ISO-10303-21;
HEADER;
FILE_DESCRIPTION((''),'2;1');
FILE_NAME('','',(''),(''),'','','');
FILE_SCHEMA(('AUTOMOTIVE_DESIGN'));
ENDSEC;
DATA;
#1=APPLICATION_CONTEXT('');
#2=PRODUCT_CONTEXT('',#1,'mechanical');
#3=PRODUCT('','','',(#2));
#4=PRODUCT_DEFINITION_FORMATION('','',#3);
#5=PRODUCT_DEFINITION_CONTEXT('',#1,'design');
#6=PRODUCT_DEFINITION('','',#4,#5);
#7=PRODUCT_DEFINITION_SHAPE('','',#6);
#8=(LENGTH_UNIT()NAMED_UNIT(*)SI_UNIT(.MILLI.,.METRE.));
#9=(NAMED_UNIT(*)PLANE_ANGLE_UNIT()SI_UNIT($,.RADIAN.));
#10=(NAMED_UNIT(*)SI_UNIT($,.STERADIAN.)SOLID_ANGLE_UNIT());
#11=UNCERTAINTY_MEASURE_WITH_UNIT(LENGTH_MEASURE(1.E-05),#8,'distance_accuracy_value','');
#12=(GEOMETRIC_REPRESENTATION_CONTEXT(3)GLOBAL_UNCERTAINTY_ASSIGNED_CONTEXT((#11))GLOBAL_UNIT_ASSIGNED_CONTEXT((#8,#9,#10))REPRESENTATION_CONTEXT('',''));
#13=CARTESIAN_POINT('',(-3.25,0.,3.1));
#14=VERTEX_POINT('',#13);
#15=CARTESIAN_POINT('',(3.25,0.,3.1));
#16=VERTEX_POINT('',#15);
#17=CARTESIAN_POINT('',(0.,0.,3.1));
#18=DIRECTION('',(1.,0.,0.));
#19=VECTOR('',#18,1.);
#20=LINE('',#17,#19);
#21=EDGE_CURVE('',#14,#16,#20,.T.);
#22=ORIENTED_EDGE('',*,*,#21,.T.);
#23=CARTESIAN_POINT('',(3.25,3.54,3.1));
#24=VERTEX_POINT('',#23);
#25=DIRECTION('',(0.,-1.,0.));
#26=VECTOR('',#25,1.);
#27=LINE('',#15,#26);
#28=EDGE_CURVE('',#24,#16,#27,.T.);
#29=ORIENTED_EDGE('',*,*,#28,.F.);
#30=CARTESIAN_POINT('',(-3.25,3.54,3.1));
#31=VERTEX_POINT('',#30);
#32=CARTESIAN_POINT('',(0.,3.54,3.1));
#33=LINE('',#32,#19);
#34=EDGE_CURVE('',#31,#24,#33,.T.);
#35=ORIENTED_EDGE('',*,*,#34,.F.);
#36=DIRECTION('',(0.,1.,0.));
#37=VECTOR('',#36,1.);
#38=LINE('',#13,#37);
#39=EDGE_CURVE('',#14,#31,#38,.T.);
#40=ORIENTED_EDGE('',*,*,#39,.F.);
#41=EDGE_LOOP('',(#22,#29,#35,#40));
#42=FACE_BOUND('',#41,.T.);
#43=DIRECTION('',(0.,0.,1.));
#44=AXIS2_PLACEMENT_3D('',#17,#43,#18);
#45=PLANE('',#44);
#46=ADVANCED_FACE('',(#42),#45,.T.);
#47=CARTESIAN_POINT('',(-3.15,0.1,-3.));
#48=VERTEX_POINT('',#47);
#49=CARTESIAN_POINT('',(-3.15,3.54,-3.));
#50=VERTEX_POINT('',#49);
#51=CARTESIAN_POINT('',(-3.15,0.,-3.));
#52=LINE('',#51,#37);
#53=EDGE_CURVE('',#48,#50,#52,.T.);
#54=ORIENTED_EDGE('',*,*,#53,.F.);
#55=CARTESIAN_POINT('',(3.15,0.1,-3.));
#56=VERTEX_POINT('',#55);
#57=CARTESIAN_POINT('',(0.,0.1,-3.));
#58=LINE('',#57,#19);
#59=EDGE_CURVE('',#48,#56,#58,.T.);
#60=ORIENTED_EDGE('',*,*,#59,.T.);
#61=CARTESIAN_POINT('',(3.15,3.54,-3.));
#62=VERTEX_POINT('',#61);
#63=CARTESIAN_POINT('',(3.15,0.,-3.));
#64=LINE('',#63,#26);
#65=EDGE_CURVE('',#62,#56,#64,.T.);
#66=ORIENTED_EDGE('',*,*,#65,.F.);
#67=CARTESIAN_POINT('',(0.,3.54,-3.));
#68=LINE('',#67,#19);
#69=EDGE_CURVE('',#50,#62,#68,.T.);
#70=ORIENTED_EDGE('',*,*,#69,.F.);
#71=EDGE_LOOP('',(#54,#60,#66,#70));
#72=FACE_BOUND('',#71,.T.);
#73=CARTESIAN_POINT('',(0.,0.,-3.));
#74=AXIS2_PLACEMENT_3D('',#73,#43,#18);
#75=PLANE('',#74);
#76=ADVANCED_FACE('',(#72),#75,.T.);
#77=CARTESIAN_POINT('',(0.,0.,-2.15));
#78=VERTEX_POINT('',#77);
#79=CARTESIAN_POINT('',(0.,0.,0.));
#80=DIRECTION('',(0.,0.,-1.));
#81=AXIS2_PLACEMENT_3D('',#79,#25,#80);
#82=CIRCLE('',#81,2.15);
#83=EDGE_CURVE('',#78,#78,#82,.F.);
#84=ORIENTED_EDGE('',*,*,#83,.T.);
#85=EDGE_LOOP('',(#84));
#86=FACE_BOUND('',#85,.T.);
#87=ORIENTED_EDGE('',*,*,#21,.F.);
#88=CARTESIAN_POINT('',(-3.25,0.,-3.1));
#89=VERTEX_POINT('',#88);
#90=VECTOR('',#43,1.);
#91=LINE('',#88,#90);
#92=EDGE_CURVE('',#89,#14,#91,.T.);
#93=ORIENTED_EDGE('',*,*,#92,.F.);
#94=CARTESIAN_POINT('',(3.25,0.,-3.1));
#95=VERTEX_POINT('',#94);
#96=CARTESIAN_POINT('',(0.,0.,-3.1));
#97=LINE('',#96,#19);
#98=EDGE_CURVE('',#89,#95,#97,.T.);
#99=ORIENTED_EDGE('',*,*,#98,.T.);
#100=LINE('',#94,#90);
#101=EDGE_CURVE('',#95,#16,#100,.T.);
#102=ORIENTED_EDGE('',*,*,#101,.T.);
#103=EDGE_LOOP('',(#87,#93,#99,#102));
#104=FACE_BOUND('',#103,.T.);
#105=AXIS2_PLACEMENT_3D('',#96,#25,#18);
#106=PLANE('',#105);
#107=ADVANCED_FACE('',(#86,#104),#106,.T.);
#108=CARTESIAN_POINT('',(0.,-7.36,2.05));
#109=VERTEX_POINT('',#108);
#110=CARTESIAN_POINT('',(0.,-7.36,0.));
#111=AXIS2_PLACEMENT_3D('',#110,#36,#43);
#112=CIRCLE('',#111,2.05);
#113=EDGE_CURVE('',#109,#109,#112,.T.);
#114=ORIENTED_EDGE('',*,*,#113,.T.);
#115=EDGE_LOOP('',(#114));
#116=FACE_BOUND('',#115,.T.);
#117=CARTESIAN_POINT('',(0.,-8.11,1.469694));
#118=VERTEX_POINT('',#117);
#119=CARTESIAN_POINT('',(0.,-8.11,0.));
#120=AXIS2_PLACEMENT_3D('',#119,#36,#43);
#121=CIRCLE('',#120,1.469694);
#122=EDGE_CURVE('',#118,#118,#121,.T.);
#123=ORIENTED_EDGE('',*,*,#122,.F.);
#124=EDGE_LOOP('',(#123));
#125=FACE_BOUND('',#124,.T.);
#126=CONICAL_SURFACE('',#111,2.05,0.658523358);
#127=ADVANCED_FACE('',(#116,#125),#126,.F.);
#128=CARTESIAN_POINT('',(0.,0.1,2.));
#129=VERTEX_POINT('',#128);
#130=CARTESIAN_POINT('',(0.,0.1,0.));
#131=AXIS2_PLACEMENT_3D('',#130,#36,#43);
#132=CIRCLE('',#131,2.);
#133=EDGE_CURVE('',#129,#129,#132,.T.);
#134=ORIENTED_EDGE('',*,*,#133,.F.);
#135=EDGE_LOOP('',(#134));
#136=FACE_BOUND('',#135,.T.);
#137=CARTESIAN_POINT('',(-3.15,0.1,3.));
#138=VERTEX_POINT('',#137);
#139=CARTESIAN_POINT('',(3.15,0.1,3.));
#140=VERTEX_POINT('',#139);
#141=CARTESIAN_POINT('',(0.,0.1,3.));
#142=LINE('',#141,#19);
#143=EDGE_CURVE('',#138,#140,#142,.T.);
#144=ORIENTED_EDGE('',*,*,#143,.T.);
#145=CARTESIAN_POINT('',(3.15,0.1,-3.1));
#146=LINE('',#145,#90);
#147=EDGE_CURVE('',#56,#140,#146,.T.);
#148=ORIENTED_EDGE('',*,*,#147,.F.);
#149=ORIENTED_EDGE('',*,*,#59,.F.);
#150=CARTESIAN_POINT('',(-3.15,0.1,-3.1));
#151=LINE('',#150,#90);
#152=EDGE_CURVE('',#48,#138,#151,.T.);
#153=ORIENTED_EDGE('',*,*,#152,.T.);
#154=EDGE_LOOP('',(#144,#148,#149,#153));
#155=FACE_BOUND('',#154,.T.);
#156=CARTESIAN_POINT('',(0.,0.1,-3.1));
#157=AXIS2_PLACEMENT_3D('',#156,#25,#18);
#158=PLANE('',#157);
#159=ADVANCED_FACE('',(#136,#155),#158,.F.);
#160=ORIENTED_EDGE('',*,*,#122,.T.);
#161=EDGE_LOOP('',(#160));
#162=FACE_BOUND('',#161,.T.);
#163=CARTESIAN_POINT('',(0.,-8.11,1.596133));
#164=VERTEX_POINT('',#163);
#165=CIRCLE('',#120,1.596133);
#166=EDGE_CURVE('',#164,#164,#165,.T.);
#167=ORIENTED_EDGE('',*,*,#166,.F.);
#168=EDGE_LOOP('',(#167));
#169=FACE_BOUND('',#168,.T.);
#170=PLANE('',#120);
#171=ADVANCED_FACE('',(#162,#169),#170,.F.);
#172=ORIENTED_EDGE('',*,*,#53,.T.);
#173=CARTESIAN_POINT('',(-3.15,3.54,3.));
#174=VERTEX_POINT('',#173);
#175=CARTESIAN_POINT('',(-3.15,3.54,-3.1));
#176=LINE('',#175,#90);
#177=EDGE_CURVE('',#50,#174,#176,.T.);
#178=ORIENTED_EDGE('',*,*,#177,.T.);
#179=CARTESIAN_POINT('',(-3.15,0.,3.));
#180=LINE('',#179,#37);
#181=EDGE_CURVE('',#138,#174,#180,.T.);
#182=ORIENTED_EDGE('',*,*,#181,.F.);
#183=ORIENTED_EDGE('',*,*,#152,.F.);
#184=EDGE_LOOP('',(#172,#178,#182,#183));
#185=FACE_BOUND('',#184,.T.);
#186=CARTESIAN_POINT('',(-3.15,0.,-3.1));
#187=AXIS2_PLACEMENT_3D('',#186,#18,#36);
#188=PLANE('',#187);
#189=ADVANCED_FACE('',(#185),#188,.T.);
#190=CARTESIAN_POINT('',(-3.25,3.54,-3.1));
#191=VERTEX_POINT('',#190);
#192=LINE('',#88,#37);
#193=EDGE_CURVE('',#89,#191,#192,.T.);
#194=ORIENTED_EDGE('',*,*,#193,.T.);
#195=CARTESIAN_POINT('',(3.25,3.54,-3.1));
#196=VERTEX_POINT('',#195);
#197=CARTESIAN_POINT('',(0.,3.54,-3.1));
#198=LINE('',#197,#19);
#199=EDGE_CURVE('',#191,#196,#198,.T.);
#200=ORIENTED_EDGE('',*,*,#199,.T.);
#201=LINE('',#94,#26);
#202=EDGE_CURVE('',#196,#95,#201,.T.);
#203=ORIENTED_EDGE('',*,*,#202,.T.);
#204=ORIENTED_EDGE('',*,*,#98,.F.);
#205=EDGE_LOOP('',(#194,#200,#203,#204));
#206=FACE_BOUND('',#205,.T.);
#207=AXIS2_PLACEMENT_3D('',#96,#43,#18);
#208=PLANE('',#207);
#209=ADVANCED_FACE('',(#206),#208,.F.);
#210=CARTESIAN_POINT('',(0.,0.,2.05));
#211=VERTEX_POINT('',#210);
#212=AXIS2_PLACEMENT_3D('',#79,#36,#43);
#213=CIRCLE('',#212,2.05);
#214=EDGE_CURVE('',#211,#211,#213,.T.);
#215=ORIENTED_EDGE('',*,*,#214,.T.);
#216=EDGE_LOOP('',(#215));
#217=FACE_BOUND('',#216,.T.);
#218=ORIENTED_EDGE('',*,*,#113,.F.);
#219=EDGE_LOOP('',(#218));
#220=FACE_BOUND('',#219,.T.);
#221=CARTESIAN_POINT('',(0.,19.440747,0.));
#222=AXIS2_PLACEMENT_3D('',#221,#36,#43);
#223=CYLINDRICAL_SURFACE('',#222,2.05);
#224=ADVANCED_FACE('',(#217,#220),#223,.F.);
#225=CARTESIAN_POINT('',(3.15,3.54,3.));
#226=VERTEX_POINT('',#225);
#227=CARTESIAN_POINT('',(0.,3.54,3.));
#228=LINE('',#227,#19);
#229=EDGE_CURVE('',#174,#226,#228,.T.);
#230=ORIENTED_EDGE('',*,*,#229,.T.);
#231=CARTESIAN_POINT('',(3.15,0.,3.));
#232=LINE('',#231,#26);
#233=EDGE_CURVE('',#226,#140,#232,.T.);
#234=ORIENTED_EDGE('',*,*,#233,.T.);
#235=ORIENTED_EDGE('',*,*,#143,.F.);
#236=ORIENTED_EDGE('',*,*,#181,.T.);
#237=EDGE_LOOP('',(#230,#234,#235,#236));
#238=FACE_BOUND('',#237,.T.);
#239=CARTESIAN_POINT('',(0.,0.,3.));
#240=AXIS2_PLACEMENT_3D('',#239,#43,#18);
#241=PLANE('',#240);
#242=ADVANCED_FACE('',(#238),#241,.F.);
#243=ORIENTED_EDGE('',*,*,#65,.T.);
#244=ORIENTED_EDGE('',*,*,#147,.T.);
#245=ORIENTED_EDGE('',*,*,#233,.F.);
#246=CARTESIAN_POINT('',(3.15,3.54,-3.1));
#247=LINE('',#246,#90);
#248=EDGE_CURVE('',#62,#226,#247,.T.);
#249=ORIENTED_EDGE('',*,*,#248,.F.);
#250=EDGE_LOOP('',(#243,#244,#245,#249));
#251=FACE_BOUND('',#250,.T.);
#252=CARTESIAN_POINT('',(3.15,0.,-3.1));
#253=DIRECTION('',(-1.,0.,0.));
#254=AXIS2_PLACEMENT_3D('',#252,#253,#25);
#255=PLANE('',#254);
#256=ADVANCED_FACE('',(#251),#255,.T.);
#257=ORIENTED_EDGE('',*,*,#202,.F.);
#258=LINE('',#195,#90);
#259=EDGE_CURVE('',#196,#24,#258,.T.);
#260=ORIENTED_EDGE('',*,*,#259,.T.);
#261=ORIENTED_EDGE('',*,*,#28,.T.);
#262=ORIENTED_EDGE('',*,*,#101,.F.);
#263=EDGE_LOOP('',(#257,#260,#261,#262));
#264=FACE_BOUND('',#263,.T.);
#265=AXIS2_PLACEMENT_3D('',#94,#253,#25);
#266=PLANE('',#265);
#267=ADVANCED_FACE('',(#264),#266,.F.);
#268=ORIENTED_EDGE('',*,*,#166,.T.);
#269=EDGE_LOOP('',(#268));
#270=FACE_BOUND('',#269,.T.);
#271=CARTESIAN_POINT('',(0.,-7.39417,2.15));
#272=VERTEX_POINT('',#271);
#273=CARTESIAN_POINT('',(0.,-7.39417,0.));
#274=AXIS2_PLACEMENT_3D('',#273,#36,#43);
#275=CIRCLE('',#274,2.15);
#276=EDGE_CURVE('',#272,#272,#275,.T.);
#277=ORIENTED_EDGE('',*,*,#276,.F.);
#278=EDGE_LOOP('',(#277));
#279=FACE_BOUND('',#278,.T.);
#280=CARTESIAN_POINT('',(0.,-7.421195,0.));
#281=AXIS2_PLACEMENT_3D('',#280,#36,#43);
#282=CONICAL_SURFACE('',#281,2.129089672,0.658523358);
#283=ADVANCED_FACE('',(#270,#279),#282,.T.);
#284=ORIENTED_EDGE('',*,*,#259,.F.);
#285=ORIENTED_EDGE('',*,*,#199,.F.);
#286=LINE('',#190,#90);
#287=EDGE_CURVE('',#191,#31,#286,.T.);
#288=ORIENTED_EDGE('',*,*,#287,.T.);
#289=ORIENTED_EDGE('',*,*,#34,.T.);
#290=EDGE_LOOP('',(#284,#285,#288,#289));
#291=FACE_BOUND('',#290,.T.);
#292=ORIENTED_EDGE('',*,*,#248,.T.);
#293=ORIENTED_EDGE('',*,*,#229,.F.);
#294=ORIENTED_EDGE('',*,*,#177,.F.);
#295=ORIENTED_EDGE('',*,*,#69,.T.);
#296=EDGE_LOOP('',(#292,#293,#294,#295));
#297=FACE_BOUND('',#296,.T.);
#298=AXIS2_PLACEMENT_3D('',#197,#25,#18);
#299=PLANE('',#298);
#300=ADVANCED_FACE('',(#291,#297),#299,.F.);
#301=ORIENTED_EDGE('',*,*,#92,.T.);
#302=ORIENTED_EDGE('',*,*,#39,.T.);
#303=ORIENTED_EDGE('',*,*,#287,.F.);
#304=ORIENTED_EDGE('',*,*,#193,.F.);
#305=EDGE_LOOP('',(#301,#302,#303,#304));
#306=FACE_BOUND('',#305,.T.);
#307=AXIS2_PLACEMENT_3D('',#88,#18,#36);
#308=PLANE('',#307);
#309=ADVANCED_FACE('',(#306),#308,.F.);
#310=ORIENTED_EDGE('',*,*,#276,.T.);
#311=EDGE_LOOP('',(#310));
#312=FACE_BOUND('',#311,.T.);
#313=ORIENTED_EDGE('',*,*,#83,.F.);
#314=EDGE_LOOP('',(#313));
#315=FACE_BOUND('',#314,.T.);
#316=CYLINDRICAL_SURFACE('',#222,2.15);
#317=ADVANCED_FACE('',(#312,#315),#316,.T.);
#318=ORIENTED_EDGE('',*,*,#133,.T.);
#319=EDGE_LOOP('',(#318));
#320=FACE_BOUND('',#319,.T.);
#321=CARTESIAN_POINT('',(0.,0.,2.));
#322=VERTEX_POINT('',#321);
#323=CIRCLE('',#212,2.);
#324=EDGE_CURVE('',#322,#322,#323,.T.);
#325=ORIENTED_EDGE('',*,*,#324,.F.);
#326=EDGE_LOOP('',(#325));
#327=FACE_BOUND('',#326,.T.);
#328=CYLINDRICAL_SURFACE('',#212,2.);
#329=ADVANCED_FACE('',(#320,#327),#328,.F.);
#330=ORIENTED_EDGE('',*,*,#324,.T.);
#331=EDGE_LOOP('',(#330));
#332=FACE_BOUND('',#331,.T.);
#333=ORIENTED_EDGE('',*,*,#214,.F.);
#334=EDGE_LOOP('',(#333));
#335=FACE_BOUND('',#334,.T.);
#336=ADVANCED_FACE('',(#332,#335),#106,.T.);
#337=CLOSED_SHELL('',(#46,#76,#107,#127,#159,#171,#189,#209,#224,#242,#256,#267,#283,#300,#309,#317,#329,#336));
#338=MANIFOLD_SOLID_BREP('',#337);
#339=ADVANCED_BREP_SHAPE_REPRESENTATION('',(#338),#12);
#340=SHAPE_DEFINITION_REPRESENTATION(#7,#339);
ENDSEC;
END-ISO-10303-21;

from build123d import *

# Parameters (mm, degrees)
SHELL3_T                 = 0.1
BOSS_EXTRUDE1_DEPTH      = 3.1
BOSS_EXTRUDE1_DEPTH_BACK = 3.1
SKETCH1_3_W              = 3.25
SKETCH1_3_H              = 3.54
SHELL4_START             = -3
SHELL4_OUTLINE_W         = 6.3
SHELL4_OUTLINE_H         = 3.44
SHELL4_DEPTH             = 6
SKETCH2_R                = 2
CUT_EXTRUDE2_DEPTH       = 0.1


# Read off the part's stored shape, not the designer's step: Shell4
with BuildPart() as part:
    # Sketch1 → Revolve2 (revolve)
    with BuildSketch(Plane.XY, mode=Mode.PRIVATE) as revolve2_sk:
        Polygon((0, 0), (-2.05, 0), (-2.05, -7.36), (-1.469693846, -8.11), (0, -8.11), align=None)
    revolve(revolve2_sk.sketch.rotate(Axis((0, 19.440747496, 0), (0, -1, 0)), 270), axis=Axis((0, 19.440747496, 0), (0, -1, 0)))

    # Shell3
    shell3_openings = [part.faces().sort_by_distance(p)[0] for p in [
        (0, 0, 0),
        (0, -8.11, 0),
    ]]
    offset(amount=SHELL3_T, openings=shell3_openings, kind=Kind.INTERSECTION)

    # Sketch1<3> → Boss-Extrude1 (add, two sides: drawn at the far end of the back side and taken through both)
    with BuildSketch(Plane.XY.offset(-BOSS_EXTRUDE1_DEPTH_BACK)):
        Polygon((-3.25, 3.54), (-3.25, 0), (-2.05, 0), (0, 0), (0, 3.54), align=None)
        with Locations((1.625, 1.77)):
            Rectangle(SKETCH1_3_W, SKETCH1_3_H)
    extrude(amount=BOSS_EXTRUDE1_DEPTH + BOSS_EXTRUDE1_DEPTH_BACK)

    # Shell4 outline → Shell4 (cut)
    with BuildSketch(Plane.XY.offset(SHELL4_START)):
        with Locations((0, 1.82)):
            Rectangle(SHELL4_OUTLINE_W, SHELL4_OUTLINE_H)
    extrude(amount=SHELL4_DEPTH, mode=Mode.SUBTRACT)

    # Sketch2 → Cut-Extrude2 (cut)
    with BuildSketch(Plane(origin=(0, 0.1, 0), x_dir=(1, 0, 0), z_dir=(0, 1, 0))):
        with Locations(Location((0, 0, 0), (0, 0, 270))):
            Circle(SKETCH2_R)
    extrude(amount=-CUT_EXTRUDE2_DEPTH, mode=Mode.SUBTRACT)


solid = part.part
